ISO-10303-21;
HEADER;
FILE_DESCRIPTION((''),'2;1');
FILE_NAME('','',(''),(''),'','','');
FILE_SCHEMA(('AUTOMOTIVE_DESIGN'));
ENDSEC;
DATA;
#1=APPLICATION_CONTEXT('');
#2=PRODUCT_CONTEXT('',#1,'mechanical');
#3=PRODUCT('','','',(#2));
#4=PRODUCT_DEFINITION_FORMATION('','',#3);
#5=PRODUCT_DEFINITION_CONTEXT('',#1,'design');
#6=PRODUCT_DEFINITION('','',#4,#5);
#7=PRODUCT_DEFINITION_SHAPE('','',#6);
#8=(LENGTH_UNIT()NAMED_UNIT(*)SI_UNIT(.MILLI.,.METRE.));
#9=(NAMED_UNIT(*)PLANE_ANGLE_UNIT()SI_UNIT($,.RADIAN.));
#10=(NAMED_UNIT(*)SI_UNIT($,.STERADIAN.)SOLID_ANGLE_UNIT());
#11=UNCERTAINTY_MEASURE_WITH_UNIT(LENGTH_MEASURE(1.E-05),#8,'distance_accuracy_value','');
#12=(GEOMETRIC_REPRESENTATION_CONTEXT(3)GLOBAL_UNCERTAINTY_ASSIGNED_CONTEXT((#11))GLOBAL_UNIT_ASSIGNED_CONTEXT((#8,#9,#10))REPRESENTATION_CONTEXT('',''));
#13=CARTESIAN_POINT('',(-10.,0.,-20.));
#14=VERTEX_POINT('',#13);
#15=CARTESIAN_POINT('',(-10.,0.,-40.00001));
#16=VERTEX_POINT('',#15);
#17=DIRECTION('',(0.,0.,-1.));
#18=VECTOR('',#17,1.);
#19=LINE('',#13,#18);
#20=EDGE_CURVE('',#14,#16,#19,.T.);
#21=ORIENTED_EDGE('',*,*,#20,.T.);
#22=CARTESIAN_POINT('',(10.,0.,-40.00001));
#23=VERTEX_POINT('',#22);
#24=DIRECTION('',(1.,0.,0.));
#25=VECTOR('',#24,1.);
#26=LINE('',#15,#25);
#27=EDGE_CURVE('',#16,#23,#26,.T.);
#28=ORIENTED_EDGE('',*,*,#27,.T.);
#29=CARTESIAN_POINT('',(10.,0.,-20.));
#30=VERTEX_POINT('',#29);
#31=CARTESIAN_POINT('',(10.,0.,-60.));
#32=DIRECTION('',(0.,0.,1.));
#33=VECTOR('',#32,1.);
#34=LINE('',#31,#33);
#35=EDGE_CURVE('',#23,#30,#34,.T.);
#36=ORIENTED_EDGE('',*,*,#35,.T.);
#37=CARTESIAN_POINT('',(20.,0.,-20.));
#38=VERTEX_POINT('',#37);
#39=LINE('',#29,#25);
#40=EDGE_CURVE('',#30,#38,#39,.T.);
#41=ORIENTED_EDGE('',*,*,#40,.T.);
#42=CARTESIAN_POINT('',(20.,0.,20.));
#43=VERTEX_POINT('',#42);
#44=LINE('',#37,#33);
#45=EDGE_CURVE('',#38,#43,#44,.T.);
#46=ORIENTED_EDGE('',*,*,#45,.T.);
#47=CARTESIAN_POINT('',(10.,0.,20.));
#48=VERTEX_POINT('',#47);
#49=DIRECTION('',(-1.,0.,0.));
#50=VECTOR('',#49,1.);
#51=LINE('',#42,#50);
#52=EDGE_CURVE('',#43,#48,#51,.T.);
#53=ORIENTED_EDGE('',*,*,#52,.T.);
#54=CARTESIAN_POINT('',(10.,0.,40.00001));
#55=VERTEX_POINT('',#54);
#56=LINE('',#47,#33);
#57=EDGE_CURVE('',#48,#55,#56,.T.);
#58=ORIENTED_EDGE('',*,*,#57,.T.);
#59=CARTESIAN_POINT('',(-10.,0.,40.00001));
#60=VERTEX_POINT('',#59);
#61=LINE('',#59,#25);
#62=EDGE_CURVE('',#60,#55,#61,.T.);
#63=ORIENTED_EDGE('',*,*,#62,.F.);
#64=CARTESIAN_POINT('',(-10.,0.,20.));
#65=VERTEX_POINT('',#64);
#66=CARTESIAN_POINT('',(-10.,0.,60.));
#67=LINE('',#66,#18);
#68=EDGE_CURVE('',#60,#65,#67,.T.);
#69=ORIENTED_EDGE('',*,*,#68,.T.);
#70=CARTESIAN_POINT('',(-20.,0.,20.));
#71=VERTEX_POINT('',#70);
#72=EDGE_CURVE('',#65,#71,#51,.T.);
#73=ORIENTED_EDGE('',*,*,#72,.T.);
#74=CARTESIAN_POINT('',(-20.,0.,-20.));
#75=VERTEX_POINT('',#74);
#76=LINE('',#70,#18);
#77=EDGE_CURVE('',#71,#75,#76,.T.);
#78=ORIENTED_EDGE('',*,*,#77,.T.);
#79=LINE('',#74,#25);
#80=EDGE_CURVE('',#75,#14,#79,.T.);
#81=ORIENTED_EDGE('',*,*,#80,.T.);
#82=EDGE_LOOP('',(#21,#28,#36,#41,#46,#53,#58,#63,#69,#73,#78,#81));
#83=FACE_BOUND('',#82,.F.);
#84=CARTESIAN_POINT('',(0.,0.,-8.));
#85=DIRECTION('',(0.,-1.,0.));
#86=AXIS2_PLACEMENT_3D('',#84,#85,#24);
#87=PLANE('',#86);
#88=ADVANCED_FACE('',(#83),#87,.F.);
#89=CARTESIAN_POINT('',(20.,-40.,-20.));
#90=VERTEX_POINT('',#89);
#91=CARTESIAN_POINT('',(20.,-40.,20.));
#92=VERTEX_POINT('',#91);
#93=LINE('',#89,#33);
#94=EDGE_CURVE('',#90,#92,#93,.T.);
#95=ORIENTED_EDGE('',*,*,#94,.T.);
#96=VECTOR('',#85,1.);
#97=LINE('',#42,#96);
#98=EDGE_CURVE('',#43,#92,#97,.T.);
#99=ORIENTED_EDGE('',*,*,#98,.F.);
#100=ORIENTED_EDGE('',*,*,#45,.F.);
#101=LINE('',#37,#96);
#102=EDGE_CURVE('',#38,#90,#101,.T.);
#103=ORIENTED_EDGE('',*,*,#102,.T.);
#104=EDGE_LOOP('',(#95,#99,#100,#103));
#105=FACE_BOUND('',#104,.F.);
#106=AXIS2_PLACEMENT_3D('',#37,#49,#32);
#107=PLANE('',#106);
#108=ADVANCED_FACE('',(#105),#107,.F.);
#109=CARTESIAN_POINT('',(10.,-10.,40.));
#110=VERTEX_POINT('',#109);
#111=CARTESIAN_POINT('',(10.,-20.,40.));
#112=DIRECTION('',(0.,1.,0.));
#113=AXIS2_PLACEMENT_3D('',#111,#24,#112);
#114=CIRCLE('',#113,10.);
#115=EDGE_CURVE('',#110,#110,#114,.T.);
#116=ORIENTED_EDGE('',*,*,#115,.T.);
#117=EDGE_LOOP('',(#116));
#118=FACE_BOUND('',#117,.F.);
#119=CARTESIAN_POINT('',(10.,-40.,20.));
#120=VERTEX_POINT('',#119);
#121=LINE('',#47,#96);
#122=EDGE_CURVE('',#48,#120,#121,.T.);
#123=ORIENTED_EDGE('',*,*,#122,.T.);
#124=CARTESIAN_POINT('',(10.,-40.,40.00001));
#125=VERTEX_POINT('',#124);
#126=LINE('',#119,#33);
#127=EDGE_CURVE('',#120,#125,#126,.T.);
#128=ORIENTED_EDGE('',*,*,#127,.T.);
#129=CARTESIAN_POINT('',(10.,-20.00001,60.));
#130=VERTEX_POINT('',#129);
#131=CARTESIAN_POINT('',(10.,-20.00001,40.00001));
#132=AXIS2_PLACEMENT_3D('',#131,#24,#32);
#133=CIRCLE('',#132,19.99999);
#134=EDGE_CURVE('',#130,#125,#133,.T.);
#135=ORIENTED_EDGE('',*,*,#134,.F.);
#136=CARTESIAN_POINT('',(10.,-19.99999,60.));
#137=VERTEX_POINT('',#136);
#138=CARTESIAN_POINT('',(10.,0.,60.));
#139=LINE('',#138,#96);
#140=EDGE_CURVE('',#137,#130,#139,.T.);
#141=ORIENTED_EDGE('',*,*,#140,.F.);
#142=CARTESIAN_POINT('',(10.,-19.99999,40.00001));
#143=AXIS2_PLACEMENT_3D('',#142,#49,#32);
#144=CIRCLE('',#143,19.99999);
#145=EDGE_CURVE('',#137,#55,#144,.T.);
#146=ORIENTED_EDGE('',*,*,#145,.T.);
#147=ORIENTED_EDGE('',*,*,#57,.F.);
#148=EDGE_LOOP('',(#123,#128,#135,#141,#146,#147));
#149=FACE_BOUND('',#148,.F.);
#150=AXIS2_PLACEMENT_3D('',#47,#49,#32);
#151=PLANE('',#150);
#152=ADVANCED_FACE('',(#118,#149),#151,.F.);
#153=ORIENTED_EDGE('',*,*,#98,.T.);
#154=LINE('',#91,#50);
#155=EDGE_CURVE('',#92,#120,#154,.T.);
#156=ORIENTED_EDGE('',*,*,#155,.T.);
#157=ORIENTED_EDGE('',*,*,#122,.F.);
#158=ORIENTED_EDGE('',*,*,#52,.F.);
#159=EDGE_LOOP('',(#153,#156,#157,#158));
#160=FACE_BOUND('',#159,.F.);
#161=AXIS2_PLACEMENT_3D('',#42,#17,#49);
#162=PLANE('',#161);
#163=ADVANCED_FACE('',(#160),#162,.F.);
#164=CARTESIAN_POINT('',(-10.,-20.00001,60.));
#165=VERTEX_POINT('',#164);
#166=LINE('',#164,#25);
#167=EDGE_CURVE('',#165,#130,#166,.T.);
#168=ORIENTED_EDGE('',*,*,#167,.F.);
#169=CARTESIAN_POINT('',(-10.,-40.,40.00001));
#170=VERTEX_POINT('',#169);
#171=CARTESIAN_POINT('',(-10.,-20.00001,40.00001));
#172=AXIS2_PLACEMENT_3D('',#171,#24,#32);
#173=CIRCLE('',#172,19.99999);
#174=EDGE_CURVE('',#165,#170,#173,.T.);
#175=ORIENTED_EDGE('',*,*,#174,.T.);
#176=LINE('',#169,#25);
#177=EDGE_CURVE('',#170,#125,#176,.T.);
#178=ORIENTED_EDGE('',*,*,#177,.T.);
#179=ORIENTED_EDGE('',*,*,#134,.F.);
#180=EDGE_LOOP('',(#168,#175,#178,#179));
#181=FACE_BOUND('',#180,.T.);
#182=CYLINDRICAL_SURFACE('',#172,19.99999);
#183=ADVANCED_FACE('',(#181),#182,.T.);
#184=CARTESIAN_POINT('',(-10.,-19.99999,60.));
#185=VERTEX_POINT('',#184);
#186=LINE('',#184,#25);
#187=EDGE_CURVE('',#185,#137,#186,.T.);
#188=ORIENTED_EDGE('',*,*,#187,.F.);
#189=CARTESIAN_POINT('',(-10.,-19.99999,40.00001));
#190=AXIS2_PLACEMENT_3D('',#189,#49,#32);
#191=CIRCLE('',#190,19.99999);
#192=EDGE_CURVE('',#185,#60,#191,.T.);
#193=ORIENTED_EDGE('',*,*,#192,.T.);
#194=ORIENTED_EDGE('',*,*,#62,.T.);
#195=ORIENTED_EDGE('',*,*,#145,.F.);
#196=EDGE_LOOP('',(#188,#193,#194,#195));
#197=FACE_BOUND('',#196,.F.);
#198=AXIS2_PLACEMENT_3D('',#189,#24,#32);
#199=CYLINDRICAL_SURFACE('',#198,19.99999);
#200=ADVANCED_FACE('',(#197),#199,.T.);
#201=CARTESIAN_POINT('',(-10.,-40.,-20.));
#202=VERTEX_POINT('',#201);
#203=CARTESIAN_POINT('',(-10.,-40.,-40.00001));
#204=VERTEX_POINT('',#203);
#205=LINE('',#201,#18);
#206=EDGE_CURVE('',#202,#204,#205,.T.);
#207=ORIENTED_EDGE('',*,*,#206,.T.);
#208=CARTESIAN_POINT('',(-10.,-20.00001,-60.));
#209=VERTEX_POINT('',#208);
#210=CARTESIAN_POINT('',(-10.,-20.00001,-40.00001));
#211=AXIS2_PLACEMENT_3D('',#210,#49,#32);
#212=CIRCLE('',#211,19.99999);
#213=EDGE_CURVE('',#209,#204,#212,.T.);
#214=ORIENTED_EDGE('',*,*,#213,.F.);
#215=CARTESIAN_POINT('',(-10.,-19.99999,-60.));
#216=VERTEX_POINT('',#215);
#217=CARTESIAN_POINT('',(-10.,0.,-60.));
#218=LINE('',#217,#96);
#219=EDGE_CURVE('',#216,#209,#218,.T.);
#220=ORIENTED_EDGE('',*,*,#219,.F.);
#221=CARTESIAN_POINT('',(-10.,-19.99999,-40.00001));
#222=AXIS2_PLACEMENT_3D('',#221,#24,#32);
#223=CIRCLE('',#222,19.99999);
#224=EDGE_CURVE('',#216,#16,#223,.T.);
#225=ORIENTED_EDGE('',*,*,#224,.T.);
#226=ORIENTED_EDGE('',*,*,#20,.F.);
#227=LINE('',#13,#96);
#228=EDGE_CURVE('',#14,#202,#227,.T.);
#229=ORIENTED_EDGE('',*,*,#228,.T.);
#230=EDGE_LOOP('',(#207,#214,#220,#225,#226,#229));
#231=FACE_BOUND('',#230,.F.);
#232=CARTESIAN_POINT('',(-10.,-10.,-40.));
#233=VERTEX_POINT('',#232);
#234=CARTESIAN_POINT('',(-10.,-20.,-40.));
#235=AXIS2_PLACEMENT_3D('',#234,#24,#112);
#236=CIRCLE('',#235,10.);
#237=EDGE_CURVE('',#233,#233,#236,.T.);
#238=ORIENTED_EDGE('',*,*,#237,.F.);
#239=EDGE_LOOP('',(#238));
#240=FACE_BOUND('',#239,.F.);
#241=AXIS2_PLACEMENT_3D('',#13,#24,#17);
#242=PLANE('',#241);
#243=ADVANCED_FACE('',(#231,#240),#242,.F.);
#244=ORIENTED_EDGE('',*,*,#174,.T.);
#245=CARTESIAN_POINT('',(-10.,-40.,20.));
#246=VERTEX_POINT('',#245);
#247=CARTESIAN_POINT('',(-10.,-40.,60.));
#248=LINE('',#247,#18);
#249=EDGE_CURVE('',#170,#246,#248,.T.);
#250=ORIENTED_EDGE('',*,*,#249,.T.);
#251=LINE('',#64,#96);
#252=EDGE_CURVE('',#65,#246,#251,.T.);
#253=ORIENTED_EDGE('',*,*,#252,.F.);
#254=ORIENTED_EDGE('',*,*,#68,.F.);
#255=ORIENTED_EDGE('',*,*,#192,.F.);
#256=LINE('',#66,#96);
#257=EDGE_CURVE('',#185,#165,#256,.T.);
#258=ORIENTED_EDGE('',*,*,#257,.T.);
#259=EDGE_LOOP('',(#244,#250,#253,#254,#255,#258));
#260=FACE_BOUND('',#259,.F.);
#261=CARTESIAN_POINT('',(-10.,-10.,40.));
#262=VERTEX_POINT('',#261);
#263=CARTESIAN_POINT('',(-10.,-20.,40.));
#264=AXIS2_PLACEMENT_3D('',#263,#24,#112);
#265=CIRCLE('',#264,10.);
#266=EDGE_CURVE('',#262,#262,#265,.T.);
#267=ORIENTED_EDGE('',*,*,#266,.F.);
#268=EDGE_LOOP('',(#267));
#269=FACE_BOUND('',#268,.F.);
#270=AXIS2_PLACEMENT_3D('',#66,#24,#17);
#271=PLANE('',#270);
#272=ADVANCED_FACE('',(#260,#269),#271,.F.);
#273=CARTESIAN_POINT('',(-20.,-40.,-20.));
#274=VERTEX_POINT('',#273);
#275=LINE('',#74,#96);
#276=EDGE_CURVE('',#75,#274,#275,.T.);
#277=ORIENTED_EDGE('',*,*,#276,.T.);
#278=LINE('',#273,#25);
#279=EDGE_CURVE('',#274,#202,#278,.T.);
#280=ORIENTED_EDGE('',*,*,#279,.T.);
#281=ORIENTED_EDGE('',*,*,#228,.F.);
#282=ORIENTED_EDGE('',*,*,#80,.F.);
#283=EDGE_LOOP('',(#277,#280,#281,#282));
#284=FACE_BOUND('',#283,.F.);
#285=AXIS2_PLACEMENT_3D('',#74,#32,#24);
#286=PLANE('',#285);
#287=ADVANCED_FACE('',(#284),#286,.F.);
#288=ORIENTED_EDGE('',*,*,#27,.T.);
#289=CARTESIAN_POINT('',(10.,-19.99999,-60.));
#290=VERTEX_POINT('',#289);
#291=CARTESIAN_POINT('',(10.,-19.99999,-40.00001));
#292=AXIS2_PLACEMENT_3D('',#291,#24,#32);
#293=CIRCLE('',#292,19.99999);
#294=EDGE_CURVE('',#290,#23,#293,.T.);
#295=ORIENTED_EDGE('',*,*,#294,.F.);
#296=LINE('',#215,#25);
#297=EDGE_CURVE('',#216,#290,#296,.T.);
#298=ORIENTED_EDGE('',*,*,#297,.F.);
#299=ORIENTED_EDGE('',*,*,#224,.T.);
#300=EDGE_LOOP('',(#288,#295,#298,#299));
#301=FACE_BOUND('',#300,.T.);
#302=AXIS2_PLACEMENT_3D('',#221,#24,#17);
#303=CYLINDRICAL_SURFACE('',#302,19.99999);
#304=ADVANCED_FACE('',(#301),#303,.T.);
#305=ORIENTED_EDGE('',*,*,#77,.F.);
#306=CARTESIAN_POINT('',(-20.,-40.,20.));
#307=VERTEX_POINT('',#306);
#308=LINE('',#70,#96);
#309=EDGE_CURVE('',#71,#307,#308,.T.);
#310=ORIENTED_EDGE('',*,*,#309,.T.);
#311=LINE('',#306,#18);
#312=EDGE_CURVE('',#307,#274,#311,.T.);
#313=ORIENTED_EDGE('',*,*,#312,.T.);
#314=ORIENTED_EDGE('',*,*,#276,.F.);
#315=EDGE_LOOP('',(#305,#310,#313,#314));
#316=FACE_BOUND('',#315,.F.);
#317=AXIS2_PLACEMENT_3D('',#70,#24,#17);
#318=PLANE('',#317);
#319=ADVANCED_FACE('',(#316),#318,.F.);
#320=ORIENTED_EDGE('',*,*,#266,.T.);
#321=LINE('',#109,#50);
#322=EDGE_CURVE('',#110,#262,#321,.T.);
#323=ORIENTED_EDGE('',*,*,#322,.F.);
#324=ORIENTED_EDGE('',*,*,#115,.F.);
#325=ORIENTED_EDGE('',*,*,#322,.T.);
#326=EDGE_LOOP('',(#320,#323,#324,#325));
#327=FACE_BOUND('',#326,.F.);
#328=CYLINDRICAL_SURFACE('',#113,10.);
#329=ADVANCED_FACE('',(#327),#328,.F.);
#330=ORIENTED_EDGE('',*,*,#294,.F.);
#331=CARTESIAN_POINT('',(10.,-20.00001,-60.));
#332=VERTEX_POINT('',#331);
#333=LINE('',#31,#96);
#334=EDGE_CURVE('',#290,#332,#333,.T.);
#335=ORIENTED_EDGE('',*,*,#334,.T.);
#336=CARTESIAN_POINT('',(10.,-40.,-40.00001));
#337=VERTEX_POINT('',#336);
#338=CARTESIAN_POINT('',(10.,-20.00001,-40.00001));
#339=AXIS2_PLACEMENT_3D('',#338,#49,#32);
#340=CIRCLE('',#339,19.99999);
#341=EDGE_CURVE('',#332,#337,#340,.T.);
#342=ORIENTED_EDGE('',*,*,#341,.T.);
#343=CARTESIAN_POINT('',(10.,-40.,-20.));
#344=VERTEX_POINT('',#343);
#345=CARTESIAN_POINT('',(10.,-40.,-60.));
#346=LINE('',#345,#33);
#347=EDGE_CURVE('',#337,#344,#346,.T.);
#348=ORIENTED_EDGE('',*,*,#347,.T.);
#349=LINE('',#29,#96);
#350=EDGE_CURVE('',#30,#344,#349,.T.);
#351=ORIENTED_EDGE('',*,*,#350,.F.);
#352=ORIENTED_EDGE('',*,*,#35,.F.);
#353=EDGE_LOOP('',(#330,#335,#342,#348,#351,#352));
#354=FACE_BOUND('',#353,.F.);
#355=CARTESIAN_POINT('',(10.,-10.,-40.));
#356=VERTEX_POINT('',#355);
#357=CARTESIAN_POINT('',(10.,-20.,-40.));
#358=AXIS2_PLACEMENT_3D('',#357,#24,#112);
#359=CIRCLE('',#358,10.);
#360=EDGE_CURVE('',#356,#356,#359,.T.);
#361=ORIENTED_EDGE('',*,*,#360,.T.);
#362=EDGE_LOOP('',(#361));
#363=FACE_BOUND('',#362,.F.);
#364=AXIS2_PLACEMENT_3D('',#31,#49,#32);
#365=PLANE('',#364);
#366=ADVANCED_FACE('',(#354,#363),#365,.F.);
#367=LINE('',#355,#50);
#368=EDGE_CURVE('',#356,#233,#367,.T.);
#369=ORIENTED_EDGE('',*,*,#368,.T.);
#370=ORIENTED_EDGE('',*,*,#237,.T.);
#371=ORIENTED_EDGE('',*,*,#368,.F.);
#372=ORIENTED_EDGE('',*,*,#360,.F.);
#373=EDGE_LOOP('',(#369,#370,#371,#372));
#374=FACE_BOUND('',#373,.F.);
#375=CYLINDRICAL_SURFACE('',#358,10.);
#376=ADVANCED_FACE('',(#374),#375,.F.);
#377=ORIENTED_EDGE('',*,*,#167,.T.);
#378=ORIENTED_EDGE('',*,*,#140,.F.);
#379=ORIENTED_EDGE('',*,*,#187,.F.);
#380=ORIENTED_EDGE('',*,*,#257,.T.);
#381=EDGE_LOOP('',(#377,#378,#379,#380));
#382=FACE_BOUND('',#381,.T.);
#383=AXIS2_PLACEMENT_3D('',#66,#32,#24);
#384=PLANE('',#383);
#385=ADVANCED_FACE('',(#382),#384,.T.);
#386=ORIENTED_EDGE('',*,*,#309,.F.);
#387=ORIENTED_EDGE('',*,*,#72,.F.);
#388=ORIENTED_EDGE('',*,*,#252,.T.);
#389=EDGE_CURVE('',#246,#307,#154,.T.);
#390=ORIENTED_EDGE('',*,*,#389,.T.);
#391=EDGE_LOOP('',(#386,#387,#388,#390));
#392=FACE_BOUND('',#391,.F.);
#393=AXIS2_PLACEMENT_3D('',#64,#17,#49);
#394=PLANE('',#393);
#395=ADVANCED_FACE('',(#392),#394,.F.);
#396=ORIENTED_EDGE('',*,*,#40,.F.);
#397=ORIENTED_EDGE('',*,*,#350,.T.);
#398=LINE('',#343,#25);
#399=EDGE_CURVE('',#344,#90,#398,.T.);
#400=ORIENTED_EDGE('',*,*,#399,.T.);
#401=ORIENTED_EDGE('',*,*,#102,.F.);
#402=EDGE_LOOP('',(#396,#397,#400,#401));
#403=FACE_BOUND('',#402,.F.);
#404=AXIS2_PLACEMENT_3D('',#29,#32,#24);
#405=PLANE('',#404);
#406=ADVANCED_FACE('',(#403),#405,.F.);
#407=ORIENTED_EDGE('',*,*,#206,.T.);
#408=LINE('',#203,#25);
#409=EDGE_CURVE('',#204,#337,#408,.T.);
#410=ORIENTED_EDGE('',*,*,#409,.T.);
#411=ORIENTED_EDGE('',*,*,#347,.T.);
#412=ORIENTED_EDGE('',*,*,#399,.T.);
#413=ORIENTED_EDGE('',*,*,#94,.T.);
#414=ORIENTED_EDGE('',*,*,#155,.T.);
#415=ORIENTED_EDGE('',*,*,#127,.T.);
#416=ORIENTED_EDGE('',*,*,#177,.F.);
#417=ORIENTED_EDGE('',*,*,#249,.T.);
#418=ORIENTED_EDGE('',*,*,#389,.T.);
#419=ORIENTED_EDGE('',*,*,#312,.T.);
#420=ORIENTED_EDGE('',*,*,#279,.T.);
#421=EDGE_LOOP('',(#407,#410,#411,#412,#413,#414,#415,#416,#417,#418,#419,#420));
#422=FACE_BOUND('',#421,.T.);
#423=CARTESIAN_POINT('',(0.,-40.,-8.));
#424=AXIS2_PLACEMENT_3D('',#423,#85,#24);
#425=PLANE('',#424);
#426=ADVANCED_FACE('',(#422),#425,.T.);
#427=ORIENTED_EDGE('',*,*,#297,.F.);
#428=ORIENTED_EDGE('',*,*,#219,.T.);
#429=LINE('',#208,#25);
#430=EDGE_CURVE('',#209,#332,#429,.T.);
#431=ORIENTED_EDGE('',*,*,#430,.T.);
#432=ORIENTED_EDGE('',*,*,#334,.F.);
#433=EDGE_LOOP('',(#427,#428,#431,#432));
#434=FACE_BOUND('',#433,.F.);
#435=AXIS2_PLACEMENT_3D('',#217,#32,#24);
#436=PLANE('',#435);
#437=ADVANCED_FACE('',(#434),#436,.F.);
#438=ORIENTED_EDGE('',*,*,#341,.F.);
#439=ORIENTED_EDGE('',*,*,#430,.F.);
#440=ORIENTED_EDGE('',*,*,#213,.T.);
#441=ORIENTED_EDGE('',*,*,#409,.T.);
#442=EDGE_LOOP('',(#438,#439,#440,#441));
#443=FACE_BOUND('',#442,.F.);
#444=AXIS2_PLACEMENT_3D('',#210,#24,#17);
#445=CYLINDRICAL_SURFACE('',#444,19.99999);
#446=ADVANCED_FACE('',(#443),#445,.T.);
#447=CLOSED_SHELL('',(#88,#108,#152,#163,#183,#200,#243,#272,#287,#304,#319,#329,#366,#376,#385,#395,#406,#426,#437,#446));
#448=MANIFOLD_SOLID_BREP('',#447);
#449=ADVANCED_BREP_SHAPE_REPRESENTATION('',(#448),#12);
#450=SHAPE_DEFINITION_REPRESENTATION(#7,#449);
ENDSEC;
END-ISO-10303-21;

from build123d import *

# Parameters (mm, degrees)
F0_W     = 20
F0_H     = 20
F1_DEPTH = 40
F2_R     = 19.99999
F3_R     = 10
F5_DEPTH = 20
F4_R     = 10
F6_DEPTH = 20


# Not quite as in the source:
# - a fillet or chamfer is up to 0.001 mm smaller than in the source, because OpenCascade refuses the exact size


with BuildPart() as f1:
    # F0 (on Front) → F1 (new body)
    with BuildSketch(Plane.XZ):
        Polygon((10, -20), (20, -20), (20, 20), (10, 20), (-10, 20), (-20, 20), (-20, -20), (-10, -20), (-10, -40), (10, -40), align=None)
        with Locations((0, 30)):
            Rectangle(F0_W, F0_H)
        with Locations((0, 50)):
            Rectangle(F0_W, F0_H)
        with Locations((0, -50)):
            Rectangle(F0_W, F0_H)
    extrude(amount=F1_DEPTH)

    # F2 (radius 20 in the source; OpenCascade refuses exactly that, so slightly less here)
    f2_edges = [f1.edges().sort_by_distance(p)[0] for p in [
        (0, -40, 60),
        (0, 0, 60),
        (0, -40, -60),
        (0, 0, -60),
    ]]
    fillet(f2_edges, radius=F2_R)

    # F3 (on face) → F5 (cut, through all)
    with BuildSketch(Plane.YZ.offset(10)):
        with Locations((-20, 40)):
            Circle(F3_R)
    extrude(amount=-F5_DEPTH, mode=Mode.SUBTRACT)

    # F4 (on face) → F6 (cut, through all)
    with BuildSketch(Plane.YZ.offset(10)):
        with Locations((-20, -40)):
            Circle(F4_R)
    extrude(amount=-F6_DEPTH, mode=Mode.SUBTRACT)


solid = f1.part
